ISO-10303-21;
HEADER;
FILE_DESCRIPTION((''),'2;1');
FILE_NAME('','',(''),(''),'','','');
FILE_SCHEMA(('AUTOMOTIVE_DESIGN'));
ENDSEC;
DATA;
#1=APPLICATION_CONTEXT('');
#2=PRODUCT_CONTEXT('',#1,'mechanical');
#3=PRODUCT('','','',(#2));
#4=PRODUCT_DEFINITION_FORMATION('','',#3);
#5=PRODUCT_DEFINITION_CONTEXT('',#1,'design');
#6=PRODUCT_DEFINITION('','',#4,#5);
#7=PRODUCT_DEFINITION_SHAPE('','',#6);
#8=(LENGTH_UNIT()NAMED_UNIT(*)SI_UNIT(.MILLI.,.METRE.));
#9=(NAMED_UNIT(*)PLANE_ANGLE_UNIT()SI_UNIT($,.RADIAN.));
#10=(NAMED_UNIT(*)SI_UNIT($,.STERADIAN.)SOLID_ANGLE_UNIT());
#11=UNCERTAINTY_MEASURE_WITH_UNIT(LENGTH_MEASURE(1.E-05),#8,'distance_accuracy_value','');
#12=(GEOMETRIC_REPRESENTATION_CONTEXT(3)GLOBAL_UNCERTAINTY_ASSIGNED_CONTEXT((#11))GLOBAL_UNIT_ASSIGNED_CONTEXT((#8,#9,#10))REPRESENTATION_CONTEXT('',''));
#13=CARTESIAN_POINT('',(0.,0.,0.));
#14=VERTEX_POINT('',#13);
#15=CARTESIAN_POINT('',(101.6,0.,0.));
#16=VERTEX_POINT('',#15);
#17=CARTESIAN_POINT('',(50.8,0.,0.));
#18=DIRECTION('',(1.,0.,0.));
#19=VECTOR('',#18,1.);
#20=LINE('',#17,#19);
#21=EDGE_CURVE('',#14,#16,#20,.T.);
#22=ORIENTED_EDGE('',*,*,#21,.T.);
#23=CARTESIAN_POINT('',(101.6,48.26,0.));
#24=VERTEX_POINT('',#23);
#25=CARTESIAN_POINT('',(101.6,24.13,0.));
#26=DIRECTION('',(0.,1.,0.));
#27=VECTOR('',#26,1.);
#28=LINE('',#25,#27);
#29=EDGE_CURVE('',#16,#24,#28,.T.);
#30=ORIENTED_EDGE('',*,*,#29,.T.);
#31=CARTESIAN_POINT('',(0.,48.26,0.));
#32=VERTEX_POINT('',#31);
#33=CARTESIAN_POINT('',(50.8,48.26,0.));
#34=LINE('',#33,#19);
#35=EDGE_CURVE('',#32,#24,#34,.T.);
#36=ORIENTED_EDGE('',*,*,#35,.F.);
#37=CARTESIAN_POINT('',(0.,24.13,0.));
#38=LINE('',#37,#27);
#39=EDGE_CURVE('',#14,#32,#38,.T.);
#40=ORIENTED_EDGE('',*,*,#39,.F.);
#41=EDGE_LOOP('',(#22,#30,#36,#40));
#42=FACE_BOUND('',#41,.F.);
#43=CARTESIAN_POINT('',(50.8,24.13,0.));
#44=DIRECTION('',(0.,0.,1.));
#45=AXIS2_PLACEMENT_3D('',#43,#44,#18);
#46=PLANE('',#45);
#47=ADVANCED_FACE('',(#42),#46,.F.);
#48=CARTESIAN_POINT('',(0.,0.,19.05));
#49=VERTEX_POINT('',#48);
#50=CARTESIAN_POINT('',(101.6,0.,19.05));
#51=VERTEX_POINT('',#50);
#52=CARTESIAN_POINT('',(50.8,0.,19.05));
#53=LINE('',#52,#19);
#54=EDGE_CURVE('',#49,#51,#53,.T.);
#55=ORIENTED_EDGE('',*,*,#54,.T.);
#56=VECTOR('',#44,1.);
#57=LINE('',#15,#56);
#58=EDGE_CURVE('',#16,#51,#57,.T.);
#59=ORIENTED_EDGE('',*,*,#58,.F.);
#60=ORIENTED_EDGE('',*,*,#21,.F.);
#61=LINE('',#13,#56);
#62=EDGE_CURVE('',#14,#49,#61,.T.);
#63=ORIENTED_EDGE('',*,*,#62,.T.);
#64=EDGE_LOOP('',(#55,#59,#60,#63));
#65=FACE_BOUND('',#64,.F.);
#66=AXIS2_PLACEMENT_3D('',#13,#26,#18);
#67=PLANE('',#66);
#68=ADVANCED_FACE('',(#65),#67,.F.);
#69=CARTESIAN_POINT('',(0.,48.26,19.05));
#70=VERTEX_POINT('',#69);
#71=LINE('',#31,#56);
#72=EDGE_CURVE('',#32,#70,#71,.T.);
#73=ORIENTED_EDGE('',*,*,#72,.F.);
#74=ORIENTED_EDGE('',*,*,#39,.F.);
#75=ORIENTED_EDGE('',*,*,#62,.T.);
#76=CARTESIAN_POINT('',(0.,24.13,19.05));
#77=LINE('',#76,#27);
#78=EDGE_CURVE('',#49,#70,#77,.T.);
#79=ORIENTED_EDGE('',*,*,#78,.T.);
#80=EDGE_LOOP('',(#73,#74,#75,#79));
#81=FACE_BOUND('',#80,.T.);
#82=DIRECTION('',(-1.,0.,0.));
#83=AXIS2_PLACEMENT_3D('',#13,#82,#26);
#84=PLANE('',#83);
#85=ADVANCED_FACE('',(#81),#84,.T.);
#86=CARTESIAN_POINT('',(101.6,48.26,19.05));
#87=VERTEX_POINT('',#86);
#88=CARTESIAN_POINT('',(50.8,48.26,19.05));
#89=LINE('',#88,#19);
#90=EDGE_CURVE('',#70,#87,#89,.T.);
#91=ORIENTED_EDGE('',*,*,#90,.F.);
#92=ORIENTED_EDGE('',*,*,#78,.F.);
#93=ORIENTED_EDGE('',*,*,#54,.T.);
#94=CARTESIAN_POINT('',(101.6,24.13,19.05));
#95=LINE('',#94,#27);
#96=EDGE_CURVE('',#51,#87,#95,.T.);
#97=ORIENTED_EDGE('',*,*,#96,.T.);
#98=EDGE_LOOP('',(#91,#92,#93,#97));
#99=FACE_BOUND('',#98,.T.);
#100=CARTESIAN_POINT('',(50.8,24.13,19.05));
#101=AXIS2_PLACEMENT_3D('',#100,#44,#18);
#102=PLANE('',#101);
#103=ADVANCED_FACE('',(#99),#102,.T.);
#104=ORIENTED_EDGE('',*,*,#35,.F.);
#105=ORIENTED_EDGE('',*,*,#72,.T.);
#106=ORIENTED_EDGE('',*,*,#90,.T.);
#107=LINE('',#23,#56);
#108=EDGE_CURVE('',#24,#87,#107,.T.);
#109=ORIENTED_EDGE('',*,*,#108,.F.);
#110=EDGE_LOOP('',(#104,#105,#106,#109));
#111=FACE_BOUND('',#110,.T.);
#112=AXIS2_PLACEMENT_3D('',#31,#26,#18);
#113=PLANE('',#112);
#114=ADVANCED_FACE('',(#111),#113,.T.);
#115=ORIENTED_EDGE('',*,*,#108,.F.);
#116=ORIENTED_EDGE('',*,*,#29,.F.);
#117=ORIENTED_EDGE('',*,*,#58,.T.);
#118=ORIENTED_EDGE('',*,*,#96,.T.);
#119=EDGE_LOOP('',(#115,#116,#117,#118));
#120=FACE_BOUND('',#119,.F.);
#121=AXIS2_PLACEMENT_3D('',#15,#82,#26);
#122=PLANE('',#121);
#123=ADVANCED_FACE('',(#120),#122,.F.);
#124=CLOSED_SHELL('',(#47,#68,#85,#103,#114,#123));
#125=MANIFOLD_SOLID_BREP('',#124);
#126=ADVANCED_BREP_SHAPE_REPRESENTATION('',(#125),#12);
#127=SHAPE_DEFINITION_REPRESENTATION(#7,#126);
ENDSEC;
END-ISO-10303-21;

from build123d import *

# Parameters (mm, degrees)
F0_W     = 101.6
F0_H     = 48.26
F1_DEPTH = 19.05


# Not quite as in the source:
# - a feature of the source that left no trace in its solid (it failed there, or was rolled back) is left out


with BuildPart() as f1:
    # F0 (on Top) → F1 (new body)
    with BuildSketch(Plane.XY):
        with Locations((50.8, 24.13)):
            Rectangle(F0_W, F0_H)
    extrude(amount=F1_DEPTH)


solid = f1.part
